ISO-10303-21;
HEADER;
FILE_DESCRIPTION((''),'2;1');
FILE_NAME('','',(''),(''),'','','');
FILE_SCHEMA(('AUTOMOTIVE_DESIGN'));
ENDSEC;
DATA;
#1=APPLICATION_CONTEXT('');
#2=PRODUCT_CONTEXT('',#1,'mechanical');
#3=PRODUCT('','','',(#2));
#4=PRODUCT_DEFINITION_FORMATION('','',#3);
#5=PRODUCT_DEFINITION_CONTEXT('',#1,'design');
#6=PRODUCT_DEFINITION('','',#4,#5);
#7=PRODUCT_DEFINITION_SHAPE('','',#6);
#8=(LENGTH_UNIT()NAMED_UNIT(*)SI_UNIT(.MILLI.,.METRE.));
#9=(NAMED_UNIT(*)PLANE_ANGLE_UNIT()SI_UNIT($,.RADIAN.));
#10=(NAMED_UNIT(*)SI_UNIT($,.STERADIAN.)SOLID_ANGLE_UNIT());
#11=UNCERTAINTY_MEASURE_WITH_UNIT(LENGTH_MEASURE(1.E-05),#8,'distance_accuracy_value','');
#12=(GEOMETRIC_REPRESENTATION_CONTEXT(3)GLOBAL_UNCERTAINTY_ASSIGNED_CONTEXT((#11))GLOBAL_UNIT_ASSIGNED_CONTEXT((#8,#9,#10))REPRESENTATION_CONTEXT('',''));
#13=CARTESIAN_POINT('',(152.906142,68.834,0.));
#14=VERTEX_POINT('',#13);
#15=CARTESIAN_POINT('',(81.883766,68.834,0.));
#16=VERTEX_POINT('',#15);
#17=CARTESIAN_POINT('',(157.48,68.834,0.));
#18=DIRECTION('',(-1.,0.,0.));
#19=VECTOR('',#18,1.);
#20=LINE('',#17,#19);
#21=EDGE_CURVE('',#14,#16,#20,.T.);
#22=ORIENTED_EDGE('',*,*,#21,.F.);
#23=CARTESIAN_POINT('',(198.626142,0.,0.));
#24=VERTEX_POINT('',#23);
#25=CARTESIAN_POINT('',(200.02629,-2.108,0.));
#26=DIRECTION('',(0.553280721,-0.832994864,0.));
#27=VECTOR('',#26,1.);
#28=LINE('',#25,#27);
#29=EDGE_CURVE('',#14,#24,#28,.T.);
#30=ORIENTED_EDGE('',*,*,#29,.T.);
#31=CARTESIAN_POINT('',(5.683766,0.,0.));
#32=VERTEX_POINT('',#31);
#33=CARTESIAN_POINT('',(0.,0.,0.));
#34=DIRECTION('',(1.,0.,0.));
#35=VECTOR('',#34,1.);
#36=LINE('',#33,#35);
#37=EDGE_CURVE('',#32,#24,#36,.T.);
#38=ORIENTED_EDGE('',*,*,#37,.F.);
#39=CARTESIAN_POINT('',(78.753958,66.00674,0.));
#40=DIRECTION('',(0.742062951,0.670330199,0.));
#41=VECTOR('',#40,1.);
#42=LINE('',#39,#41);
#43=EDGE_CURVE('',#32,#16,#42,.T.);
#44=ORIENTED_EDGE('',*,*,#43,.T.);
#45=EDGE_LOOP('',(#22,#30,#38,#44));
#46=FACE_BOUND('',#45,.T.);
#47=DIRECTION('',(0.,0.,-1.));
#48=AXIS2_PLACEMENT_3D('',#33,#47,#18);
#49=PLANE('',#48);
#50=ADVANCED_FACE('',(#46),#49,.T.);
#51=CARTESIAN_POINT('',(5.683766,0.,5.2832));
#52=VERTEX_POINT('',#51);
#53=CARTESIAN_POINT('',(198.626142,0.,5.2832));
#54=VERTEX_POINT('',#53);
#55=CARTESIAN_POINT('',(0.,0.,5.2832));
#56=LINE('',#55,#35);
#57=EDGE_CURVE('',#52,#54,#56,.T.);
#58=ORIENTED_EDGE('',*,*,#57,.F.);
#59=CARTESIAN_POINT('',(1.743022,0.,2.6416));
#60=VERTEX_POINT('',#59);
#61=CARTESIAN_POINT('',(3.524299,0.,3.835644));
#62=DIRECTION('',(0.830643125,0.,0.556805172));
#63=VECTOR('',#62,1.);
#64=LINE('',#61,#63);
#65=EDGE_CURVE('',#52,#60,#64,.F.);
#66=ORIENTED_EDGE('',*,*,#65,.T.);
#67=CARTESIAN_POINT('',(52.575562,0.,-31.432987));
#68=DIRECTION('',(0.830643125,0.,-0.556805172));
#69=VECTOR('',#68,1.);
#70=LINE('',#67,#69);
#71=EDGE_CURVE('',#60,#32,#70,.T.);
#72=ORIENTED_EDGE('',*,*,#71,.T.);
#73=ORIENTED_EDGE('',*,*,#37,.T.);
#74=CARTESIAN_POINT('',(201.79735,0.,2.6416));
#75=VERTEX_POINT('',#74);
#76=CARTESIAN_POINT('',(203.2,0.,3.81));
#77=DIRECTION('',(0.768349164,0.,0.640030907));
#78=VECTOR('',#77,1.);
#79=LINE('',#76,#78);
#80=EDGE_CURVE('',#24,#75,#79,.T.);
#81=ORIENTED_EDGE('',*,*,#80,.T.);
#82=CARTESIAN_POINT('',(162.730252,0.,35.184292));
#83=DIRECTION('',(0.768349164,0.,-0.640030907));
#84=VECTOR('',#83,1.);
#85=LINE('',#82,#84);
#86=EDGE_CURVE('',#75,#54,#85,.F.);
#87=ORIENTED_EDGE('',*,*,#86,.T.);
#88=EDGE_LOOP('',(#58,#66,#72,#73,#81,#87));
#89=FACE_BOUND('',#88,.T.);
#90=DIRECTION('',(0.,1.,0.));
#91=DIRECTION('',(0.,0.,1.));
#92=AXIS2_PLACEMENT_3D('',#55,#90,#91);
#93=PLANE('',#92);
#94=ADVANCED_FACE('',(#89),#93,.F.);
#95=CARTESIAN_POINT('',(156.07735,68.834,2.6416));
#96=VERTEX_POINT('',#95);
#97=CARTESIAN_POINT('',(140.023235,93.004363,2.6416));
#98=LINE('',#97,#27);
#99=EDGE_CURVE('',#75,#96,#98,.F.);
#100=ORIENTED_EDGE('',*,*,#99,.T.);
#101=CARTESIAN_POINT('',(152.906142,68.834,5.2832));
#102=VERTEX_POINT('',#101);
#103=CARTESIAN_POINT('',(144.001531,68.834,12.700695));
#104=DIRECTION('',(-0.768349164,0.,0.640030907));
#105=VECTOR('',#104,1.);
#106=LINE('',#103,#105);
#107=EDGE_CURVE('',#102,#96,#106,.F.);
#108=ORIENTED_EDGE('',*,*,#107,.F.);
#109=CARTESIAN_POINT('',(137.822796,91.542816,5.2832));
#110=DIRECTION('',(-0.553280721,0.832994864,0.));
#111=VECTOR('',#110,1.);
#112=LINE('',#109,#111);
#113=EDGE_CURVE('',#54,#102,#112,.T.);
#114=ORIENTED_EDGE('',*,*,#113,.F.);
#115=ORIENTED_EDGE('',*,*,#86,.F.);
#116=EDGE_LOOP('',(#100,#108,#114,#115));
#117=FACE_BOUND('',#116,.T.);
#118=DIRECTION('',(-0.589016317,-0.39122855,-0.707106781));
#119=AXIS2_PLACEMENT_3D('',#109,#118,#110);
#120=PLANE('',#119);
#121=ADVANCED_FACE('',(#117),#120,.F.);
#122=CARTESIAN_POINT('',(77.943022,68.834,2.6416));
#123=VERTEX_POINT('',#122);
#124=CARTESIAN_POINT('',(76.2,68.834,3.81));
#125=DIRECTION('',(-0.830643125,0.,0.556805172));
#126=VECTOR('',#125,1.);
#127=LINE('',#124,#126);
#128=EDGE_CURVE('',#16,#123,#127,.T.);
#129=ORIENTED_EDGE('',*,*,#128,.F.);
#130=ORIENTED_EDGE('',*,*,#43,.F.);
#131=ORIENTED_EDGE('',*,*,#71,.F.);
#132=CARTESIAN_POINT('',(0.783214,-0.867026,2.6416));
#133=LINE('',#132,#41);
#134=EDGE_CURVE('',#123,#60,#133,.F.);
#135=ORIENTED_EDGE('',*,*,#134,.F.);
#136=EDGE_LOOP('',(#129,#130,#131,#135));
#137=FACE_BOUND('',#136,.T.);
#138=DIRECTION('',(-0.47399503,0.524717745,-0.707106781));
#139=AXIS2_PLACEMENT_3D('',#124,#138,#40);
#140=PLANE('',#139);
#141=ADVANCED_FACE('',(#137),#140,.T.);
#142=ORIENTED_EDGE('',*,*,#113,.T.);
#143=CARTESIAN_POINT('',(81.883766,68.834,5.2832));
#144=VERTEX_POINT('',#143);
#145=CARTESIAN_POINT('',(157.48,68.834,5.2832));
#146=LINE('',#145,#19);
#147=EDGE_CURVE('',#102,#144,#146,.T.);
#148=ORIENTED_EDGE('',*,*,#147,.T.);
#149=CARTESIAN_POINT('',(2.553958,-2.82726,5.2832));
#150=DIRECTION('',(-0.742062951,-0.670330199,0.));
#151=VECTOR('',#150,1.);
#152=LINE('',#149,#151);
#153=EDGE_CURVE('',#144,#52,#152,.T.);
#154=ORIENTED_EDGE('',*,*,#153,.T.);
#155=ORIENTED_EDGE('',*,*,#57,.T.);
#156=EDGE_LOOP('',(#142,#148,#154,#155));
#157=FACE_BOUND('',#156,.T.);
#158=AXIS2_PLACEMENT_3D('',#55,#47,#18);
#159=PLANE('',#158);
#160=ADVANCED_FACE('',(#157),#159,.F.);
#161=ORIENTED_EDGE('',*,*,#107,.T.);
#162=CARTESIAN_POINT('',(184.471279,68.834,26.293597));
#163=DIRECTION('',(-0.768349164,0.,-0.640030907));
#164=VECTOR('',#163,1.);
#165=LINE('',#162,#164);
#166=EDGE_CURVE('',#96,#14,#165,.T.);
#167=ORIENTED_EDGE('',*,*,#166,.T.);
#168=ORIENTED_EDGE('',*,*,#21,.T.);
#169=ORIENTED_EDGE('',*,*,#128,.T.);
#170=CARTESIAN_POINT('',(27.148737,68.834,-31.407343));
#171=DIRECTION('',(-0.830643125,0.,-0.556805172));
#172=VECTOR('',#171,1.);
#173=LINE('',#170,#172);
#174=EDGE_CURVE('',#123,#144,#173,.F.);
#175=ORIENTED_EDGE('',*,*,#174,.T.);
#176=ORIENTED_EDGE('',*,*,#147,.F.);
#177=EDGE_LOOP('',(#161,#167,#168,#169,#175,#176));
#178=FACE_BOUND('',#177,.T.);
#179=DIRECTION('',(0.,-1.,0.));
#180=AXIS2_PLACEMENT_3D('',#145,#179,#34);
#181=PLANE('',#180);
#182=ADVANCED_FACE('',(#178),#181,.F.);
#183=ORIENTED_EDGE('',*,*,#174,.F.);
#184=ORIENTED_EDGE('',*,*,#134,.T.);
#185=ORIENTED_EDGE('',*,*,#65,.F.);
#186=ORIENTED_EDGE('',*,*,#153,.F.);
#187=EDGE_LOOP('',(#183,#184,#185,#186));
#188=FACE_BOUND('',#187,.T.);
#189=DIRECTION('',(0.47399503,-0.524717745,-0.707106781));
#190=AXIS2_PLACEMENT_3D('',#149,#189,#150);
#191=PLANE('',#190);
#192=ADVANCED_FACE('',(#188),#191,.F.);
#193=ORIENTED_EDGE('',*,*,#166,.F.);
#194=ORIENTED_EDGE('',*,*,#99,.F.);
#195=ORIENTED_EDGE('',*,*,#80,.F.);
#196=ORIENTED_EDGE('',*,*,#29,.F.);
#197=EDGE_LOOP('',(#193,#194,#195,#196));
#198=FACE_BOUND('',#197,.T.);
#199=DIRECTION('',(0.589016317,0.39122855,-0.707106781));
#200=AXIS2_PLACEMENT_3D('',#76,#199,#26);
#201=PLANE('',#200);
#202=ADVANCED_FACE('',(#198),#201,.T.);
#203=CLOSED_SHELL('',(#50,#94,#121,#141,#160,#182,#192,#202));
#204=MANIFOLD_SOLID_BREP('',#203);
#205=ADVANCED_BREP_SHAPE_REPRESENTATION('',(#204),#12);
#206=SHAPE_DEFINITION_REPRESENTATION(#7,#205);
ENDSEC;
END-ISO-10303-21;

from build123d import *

# Parameters (mm, degrees)
BOSS_EXTRUDE1_DEPTH = 5.2832
CHAMFER1_SIZE       = 3.81


with BuildPart() as part:
    # Sketch1 → Boss-Extrude1 (new body)
    with BuildSketch(Plane.XY):
        Polygon((0, 0), (203.2, 0), (157.48, 68.834), (76.2, 68.834), align=None)
    extrude(amount=BOSS_EXTRUDE1_DEPTH)

    # Chamfer1
    # the kernel refuses this chamfer: 3.81 mm, written as the material it takes off along each edge
    with BuildSketch(Plane(origin=(208.621106578, -8.161777125, 5.2832), x_dir=(0.022903923995424024, 0.015212938447145094, -0.9996219169112966), z_dir=(-0.5532807214186398, 0.8329948639136195, 0))) as chamfer1_piece_1:
        Polygon((CHAMFER1_SIZE * 0.999621916911, CHAMFER1_SIZE * 0.0274958766106), (-CHAMFER1_SIZE * 0.0274958766106, CHAMFER1_SIZE * 0.999621916911), (0, 0), align=None)
    extrude(amount=102.230587414, mode=Mode.SUBTRACT)
    with BuildSketch(Plane(origin=(208.621106578, -8.161777125, 0), x_dir=(0.022903923995424024, 0.015212938447145094, 0.9996219169112966), z_dir=(-0.5532807214186398, 0.8329948639136195, 0))) as chamfer1_piece_2:
        Polygon((CHAMFER1_SIZE * 0.999621916911, -CHAMFER1_SIZE * 0.0274958766106), (-CHAMFER1_SIZE * 0.0274958766106, -CHAMFER1_SIZE * 0.999621916911), (0, 0), align=None)
    extrude(amount=102.230587414, mode=Mode.SUBTRACT)
    with BuildSketch(Plane(origin=(83.470816045, 75.401970494, 5.2832), x_dir=(-0.01843131645089907, 0.020403671347858754, -0.9996219169112968), z_dir=(-0.7420629513591385, -0.6703301993944216, 0))) as chamfer1_piece_3:
        Polygon((CHAMFER1_SIZE * 0.999621916911, CHAMFER1_SIZE * 0.0274958766106), (-CHAMFER1_SIZE * 0.0274958766106, CHAMFER1_SIZE * 0.999621916911), (0, 0), align=None)
    extrude(amount=122.282930207, mode=Mode.SUBTRACT)
    with BuildSketch(Plane(origin=(83.470816045, 75.401970494, 0), x_dir=(-0.01843131645089907, 0.020403671347858754, 0.9996219169112968), z_dir=(-0.7420629513591385, -0.6703301993944216, 0))) as chamfer1_piece_4:
        Polygon((CHAMFER1_SIZE * 0.999621916911, -CHAMFER1_SIZE * 0.0274958766106), (-CHAMFER1_SIZE * 0.0274958766106, -CHAMFER1_SIZE * 0.999621916911), (0, 0), align=None)
    extrude(amount=122.282930207, mode=Mode.SUBTRACT)


solid = part.part
